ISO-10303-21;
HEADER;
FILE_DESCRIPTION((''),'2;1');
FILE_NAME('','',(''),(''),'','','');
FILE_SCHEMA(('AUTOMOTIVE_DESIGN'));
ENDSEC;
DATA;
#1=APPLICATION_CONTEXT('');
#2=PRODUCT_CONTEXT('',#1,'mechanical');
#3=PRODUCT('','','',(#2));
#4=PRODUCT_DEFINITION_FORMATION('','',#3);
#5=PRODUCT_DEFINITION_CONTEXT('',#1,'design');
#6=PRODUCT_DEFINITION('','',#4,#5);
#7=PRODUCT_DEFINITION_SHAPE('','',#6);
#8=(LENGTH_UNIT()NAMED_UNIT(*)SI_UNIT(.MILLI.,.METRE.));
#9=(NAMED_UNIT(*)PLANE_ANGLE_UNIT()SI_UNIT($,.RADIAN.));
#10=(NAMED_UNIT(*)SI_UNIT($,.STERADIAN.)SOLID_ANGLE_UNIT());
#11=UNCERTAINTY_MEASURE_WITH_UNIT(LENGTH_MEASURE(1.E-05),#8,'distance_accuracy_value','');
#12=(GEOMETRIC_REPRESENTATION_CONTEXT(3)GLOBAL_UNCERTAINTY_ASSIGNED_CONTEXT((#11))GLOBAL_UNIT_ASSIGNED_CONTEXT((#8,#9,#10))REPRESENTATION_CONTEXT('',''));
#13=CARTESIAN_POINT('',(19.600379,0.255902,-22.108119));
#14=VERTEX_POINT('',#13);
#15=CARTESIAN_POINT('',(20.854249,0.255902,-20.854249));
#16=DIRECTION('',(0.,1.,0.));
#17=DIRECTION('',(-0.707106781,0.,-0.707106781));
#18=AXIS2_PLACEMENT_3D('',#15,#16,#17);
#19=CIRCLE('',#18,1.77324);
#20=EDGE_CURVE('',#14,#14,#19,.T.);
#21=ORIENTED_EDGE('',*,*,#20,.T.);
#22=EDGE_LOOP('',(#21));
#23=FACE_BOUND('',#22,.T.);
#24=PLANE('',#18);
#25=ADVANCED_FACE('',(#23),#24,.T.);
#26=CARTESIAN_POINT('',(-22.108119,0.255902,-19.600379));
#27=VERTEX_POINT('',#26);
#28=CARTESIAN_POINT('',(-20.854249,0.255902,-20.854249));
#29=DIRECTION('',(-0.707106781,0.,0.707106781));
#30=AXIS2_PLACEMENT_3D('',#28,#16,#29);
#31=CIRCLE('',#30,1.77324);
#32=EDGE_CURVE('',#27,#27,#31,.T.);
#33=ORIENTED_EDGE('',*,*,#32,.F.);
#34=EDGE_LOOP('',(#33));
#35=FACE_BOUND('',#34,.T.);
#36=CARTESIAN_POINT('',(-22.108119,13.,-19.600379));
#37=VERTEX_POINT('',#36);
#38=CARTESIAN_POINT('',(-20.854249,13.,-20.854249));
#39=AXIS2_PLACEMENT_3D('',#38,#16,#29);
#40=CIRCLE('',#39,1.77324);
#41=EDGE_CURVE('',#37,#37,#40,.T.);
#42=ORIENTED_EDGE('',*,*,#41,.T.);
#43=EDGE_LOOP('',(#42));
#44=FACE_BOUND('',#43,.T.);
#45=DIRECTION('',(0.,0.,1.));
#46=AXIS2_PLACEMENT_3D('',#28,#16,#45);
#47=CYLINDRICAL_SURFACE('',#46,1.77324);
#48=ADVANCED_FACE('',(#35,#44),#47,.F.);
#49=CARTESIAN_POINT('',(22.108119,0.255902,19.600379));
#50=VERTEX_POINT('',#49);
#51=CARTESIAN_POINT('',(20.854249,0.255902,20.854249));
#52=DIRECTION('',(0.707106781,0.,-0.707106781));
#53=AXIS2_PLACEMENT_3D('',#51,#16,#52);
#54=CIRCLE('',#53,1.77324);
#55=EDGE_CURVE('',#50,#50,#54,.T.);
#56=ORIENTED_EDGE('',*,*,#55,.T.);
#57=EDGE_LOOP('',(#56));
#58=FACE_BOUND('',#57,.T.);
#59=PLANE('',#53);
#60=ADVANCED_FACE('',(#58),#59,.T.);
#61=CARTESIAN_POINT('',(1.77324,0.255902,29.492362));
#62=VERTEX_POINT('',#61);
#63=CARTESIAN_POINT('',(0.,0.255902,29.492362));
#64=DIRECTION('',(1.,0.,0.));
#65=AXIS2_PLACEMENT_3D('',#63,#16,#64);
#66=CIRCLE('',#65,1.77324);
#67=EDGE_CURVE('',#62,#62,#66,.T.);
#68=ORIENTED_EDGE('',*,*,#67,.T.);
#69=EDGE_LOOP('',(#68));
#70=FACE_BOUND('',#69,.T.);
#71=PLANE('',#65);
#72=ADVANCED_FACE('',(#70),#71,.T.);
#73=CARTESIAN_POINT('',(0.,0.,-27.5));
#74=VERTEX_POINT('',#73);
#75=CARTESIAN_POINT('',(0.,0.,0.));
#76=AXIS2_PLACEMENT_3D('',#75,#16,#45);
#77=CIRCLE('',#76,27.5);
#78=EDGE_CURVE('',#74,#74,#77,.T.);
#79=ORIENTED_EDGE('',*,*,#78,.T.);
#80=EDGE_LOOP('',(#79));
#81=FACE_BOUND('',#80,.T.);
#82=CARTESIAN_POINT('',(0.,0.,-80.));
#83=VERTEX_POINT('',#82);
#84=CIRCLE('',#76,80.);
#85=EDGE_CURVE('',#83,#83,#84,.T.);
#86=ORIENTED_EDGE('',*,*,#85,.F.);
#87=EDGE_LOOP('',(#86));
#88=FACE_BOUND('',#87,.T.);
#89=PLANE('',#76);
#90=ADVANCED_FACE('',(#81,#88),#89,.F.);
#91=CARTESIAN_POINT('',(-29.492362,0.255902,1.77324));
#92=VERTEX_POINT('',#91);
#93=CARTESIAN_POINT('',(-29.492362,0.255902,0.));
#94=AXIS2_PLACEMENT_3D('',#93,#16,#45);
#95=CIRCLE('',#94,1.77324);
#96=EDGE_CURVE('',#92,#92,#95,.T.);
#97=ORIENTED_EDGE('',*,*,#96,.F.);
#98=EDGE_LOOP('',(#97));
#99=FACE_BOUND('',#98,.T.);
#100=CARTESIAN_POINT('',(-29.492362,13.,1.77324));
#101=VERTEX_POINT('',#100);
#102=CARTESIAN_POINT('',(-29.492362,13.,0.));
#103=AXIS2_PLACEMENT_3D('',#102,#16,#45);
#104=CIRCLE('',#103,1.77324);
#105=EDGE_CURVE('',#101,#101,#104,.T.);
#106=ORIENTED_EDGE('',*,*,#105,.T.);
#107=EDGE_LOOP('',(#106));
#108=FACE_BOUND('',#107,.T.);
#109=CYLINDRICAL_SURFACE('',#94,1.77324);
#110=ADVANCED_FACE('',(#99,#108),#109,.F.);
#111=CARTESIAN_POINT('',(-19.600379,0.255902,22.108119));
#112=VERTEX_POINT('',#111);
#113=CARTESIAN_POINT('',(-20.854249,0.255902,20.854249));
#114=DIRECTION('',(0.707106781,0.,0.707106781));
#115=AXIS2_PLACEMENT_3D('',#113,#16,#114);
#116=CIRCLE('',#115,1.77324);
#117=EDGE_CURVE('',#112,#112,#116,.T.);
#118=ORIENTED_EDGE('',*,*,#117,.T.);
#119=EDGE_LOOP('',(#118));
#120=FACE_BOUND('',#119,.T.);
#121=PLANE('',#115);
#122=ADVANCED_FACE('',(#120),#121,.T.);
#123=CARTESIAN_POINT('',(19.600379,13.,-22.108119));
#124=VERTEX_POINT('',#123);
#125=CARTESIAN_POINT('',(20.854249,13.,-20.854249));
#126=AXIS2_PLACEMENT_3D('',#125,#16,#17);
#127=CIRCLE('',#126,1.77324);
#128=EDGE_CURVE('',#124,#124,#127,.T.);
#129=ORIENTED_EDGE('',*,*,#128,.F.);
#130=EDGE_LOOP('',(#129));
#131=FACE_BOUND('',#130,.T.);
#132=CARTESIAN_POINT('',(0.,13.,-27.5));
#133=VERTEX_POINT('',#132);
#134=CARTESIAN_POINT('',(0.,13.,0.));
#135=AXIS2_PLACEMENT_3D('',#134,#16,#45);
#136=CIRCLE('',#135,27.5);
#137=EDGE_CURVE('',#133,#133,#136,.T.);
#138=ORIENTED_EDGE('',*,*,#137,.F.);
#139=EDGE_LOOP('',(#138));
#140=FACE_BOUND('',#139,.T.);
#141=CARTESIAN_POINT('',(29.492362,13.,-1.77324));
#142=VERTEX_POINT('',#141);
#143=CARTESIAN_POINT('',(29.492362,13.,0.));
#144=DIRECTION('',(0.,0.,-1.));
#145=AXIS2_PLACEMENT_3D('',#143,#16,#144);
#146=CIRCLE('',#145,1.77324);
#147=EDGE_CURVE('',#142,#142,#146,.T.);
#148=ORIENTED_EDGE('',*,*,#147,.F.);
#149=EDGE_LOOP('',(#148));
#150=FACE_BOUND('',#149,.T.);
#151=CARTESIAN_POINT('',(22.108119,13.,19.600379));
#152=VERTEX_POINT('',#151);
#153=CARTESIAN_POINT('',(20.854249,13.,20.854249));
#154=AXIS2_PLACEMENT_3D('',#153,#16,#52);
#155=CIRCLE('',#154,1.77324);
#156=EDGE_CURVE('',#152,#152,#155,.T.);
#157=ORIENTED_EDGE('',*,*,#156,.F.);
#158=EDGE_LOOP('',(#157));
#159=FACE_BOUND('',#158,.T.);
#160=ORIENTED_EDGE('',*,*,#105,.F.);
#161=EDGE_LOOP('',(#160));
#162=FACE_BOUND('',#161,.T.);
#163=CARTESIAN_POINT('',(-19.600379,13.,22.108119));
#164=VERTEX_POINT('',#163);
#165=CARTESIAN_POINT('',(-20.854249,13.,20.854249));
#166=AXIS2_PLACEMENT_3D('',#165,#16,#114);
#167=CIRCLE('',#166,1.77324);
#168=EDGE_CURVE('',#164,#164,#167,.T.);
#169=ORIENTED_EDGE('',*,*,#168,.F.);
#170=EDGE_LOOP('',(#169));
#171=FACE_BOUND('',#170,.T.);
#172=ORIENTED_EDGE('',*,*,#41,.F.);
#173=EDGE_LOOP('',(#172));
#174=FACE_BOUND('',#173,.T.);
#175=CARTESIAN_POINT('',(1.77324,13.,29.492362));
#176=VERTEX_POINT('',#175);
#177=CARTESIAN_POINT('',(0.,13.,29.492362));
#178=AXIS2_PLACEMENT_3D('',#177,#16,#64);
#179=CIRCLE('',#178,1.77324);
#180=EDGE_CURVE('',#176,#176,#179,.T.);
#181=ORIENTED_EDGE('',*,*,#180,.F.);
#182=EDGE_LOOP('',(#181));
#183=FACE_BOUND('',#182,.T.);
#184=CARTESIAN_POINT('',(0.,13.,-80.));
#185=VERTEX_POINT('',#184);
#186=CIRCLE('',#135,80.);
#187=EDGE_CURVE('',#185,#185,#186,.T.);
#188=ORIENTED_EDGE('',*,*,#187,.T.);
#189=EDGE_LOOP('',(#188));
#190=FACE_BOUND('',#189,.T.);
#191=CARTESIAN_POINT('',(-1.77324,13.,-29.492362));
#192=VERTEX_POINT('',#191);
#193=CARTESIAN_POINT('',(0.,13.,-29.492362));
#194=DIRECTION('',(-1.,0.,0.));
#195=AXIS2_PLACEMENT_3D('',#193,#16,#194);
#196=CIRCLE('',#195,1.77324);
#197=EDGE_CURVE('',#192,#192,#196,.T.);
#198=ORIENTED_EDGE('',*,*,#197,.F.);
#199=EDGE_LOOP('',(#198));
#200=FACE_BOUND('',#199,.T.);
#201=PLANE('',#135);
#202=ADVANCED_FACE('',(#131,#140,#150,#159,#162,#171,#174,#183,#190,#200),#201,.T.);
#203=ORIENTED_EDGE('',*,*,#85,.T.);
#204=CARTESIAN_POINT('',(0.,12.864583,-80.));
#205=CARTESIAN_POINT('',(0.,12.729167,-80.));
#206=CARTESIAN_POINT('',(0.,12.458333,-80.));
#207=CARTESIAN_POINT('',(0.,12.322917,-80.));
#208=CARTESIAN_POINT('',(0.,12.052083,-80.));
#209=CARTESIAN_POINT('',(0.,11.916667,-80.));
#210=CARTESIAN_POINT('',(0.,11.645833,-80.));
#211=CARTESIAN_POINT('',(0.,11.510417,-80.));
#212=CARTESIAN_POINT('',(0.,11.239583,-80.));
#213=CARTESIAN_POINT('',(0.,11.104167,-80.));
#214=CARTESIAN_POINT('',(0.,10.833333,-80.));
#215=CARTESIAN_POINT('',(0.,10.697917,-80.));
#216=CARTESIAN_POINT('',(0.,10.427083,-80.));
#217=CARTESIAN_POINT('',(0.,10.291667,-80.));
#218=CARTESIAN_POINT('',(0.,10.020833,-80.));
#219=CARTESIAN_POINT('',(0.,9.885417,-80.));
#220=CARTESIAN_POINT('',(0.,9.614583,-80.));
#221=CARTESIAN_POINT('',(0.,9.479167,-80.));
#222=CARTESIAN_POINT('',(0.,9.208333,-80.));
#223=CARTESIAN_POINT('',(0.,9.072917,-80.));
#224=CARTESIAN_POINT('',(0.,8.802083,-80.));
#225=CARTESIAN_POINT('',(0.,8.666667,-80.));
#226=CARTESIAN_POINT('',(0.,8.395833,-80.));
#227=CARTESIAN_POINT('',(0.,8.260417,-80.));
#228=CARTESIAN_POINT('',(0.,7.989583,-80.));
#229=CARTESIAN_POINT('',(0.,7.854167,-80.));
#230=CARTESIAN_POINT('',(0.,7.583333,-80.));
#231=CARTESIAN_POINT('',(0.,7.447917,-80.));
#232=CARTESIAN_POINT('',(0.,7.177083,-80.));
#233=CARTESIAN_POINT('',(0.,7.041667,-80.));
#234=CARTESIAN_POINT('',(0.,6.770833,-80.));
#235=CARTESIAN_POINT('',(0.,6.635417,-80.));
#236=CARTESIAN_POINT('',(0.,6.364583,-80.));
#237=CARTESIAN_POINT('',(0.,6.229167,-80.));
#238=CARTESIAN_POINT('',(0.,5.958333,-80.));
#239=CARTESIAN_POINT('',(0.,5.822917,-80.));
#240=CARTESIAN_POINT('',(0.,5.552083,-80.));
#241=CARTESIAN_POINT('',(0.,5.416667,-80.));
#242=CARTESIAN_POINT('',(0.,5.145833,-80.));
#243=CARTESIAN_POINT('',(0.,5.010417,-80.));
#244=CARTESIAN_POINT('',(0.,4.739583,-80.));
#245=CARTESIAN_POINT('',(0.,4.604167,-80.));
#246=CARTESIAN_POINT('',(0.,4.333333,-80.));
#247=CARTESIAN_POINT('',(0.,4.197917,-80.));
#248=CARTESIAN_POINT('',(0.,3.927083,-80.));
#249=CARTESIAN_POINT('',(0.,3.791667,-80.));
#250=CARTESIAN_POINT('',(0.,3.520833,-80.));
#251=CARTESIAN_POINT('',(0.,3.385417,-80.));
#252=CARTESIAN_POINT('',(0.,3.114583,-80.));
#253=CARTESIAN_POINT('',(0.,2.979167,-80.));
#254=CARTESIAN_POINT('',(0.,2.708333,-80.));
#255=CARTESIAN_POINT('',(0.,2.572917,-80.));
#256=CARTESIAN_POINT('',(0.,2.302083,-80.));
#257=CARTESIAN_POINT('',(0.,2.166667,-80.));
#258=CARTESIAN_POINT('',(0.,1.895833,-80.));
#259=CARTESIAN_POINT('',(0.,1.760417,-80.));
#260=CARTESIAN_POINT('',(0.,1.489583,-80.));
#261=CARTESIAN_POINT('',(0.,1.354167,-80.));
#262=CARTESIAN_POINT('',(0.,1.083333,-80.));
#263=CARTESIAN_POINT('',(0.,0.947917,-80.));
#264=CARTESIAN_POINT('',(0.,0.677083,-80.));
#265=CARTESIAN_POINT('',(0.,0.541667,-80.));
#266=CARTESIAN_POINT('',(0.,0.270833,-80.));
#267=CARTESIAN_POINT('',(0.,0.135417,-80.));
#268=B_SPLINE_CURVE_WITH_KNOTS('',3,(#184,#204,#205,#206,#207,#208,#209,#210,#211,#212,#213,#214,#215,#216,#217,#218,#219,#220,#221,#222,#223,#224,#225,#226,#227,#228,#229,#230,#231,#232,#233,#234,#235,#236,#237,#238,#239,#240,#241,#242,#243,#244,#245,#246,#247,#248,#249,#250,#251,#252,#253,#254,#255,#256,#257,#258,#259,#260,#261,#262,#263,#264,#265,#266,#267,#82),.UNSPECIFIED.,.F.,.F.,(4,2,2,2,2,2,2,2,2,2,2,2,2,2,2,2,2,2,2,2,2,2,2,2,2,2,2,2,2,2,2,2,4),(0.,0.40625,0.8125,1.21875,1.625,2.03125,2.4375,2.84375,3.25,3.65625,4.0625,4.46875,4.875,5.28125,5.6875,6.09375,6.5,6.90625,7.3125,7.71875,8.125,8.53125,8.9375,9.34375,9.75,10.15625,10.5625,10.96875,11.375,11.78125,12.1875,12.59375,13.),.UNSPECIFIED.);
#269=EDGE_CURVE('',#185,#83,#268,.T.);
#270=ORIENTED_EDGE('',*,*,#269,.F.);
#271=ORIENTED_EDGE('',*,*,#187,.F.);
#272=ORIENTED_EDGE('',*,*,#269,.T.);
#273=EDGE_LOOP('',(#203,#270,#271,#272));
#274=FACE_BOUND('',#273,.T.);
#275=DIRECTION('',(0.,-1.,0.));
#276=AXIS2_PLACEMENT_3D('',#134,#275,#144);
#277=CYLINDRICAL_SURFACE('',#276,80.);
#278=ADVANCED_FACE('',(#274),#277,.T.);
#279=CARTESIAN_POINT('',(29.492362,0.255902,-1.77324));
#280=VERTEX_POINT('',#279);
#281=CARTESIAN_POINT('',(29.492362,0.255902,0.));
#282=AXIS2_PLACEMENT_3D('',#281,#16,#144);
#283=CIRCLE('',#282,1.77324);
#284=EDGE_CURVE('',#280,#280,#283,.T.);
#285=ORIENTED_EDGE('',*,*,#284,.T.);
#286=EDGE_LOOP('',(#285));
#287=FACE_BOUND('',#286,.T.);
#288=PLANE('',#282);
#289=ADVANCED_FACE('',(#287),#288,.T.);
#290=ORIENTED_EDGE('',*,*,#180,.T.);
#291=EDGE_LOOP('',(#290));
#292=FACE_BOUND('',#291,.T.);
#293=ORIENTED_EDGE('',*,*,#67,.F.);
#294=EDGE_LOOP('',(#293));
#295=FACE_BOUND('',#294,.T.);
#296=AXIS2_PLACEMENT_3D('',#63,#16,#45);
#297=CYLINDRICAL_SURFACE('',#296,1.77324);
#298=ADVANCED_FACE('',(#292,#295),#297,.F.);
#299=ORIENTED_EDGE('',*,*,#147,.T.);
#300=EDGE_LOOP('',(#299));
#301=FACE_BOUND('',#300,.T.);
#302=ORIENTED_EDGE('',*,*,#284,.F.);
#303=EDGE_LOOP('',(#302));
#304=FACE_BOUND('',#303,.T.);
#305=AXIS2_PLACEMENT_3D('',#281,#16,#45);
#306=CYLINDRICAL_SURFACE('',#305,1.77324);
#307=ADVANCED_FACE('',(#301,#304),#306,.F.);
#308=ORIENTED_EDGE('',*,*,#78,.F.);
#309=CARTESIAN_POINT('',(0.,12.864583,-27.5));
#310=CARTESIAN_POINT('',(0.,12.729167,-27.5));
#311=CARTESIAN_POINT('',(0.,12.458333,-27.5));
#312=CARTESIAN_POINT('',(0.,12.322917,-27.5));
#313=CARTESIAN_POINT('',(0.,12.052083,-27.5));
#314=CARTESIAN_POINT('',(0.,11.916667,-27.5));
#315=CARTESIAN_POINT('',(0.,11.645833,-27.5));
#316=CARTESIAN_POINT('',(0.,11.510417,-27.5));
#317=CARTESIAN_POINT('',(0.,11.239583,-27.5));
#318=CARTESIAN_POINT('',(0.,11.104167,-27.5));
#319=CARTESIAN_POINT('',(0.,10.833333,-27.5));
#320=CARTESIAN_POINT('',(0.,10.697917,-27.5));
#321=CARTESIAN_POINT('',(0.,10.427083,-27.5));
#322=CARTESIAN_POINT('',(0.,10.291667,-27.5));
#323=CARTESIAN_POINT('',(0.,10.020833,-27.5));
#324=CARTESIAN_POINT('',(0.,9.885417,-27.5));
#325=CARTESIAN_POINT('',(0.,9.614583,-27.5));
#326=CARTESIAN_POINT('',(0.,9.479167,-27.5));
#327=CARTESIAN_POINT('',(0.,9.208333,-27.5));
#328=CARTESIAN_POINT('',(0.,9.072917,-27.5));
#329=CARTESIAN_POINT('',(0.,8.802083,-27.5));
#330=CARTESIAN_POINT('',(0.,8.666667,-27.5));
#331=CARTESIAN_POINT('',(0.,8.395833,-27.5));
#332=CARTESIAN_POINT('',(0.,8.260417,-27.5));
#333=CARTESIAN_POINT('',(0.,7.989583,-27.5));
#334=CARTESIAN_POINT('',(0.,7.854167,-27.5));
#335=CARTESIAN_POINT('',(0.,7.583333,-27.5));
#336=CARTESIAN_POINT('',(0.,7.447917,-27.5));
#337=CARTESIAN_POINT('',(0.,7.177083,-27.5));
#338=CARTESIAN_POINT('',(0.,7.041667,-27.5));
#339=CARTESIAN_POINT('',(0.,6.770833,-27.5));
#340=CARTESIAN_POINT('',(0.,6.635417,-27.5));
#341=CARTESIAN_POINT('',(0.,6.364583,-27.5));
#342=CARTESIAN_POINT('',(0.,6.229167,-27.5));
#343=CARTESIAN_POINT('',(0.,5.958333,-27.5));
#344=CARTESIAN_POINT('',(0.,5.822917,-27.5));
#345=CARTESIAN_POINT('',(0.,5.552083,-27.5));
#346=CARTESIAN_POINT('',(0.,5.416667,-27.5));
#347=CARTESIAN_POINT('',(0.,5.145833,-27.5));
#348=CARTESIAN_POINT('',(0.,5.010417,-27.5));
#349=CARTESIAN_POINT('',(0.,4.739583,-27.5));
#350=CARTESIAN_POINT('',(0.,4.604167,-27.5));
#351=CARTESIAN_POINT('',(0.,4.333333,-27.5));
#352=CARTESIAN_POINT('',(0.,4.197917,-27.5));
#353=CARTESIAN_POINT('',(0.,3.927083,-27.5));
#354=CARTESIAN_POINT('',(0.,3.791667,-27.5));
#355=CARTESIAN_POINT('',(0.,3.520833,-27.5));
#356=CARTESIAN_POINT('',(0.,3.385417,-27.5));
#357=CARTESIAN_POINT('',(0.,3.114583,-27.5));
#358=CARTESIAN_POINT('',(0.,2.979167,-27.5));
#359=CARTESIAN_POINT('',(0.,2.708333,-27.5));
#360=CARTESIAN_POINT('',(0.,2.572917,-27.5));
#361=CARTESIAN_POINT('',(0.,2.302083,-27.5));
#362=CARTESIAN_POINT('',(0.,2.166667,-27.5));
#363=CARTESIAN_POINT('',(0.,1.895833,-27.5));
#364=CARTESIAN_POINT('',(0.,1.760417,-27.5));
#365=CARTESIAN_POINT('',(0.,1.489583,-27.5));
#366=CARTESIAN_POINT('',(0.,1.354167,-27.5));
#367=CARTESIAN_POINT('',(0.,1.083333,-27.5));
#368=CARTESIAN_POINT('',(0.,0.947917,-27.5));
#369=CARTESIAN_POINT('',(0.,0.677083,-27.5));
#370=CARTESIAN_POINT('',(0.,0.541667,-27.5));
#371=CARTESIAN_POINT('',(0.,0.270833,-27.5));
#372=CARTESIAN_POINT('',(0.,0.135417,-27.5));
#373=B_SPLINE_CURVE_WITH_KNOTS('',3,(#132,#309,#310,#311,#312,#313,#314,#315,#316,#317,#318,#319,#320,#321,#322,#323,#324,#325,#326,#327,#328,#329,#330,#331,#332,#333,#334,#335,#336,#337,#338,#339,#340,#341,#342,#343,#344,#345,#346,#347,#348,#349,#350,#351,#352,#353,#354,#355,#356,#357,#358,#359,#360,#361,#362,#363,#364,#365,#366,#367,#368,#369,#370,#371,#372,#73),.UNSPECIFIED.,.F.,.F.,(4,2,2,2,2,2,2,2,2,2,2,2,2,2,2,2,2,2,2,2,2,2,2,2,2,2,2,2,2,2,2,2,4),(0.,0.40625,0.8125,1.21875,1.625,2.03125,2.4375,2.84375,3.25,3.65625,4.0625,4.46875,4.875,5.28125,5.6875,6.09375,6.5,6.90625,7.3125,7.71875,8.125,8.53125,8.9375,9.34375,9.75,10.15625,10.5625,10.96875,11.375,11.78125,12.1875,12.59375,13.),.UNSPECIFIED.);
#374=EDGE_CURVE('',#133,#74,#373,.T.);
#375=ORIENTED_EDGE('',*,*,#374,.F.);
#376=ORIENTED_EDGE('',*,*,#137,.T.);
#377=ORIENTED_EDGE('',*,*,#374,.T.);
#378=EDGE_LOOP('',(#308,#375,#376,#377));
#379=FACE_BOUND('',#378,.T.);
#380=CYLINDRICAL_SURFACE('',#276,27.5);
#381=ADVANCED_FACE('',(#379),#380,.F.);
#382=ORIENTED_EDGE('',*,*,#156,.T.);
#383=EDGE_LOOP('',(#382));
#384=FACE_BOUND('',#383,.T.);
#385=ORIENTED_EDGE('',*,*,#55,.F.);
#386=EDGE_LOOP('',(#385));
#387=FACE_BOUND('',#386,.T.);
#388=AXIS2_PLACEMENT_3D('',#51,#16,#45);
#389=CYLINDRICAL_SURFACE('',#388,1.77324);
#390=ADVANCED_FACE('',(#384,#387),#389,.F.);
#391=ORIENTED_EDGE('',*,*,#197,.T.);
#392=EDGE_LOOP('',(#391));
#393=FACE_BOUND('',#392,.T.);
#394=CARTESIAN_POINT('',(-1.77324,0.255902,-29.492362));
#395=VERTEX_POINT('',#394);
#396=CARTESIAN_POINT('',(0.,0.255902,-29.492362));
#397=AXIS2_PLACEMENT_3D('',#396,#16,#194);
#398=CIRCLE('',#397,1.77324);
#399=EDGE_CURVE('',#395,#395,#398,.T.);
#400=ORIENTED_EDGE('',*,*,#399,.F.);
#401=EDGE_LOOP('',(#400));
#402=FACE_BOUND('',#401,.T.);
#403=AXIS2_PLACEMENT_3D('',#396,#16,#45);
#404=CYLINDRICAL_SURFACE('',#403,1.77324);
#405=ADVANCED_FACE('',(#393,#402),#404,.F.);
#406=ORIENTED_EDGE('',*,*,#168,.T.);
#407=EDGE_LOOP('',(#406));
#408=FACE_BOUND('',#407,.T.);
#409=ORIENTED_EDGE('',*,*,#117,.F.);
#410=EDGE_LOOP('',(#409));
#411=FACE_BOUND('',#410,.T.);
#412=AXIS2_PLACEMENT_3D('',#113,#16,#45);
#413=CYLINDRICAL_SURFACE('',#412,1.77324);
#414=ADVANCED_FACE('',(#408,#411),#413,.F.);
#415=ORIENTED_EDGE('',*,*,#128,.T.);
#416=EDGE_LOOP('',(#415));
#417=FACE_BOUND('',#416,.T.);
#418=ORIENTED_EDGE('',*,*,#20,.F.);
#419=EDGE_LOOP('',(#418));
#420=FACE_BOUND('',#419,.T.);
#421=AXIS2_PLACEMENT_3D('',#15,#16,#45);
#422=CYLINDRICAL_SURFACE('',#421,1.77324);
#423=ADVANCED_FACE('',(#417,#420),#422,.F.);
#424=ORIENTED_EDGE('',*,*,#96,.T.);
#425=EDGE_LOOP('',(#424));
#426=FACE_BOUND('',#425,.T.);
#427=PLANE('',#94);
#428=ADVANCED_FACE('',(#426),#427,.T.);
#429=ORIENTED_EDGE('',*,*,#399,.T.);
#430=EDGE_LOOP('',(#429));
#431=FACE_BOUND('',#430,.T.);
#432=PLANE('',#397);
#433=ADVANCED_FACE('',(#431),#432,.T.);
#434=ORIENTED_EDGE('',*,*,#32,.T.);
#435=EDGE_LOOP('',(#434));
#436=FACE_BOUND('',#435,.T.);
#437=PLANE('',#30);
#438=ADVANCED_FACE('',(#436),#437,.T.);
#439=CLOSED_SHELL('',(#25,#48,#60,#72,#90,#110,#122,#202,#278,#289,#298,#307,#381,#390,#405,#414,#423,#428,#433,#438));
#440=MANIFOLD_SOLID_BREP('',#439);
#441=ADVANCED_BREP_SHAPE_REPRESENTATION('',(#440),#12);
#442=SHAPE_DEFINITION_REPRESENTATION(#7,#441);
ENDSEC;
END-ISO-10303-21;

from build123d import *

# Parameters (mm, degrees)
SKETCH1_R           = 80
BOSS_EXTRUDE1_DEPTH = 13
SKETCH2_R           = 27.5
CUT_EXTRUDE1_DEPTH  = 114.881517377
SKETCH3_R           = 1.77324001
CUT_EXTRUDE2_DEPTH  = 12.744097501
CIRPATTERN1_COUNT   = 8


with BuildPart() as part:
    # Sketch1 → Boss-Extrude1 (new body)
    with BuildSketch(Plane(origin=(0, 0, 0), x_dir=(1, 0, 0), z_dir=(0, 1, 0))):
        Circle(SKETCH1_R)
    extrude(amount=BOSS_EXTRUDE1_DEPTH)

    # Sketch2 → Cut-Extrude1 (cut, through all)
    with BuildSketch(Plane(origin=(0, 0, 0), x_dir=(1, 0, 0), z_dir=(0, 1, 0))):
        Circle(SKETCH2_R)
    extrude(amount=CUT_EXTRUDE1_DEPTH, mode=Mode.SUBTRACT)

    # Sketch3 → Cut-Extrude2 (cut)
    with BuildSketch(Plane(origin=(0, 13, 0), x_dir=(1, 0, 0), z_dir=(0, 1, 0))):
        with Locations((-29.492361813, 0)):
            Circle(SKETCH3_R)
    cut_extrude2 = extrude(amount=-CUT_EXTRUDE2_DEPTH, mode=Mode.SUBTRACT)

    # CirPattern1: Cut-Extrude2 ×8 about axis
    cirpattern1_axis = Axis((0, 0, 0), (0, 1, 0))
    for i in range(1, CIRPATTERN1_COUNT):
        add(cut_extrude2.rotate(cirpattern1_axis, i * 360 / CIRPATTERN1_COUNT), mode=Mode.SUBTRACT)


solid = part.part
